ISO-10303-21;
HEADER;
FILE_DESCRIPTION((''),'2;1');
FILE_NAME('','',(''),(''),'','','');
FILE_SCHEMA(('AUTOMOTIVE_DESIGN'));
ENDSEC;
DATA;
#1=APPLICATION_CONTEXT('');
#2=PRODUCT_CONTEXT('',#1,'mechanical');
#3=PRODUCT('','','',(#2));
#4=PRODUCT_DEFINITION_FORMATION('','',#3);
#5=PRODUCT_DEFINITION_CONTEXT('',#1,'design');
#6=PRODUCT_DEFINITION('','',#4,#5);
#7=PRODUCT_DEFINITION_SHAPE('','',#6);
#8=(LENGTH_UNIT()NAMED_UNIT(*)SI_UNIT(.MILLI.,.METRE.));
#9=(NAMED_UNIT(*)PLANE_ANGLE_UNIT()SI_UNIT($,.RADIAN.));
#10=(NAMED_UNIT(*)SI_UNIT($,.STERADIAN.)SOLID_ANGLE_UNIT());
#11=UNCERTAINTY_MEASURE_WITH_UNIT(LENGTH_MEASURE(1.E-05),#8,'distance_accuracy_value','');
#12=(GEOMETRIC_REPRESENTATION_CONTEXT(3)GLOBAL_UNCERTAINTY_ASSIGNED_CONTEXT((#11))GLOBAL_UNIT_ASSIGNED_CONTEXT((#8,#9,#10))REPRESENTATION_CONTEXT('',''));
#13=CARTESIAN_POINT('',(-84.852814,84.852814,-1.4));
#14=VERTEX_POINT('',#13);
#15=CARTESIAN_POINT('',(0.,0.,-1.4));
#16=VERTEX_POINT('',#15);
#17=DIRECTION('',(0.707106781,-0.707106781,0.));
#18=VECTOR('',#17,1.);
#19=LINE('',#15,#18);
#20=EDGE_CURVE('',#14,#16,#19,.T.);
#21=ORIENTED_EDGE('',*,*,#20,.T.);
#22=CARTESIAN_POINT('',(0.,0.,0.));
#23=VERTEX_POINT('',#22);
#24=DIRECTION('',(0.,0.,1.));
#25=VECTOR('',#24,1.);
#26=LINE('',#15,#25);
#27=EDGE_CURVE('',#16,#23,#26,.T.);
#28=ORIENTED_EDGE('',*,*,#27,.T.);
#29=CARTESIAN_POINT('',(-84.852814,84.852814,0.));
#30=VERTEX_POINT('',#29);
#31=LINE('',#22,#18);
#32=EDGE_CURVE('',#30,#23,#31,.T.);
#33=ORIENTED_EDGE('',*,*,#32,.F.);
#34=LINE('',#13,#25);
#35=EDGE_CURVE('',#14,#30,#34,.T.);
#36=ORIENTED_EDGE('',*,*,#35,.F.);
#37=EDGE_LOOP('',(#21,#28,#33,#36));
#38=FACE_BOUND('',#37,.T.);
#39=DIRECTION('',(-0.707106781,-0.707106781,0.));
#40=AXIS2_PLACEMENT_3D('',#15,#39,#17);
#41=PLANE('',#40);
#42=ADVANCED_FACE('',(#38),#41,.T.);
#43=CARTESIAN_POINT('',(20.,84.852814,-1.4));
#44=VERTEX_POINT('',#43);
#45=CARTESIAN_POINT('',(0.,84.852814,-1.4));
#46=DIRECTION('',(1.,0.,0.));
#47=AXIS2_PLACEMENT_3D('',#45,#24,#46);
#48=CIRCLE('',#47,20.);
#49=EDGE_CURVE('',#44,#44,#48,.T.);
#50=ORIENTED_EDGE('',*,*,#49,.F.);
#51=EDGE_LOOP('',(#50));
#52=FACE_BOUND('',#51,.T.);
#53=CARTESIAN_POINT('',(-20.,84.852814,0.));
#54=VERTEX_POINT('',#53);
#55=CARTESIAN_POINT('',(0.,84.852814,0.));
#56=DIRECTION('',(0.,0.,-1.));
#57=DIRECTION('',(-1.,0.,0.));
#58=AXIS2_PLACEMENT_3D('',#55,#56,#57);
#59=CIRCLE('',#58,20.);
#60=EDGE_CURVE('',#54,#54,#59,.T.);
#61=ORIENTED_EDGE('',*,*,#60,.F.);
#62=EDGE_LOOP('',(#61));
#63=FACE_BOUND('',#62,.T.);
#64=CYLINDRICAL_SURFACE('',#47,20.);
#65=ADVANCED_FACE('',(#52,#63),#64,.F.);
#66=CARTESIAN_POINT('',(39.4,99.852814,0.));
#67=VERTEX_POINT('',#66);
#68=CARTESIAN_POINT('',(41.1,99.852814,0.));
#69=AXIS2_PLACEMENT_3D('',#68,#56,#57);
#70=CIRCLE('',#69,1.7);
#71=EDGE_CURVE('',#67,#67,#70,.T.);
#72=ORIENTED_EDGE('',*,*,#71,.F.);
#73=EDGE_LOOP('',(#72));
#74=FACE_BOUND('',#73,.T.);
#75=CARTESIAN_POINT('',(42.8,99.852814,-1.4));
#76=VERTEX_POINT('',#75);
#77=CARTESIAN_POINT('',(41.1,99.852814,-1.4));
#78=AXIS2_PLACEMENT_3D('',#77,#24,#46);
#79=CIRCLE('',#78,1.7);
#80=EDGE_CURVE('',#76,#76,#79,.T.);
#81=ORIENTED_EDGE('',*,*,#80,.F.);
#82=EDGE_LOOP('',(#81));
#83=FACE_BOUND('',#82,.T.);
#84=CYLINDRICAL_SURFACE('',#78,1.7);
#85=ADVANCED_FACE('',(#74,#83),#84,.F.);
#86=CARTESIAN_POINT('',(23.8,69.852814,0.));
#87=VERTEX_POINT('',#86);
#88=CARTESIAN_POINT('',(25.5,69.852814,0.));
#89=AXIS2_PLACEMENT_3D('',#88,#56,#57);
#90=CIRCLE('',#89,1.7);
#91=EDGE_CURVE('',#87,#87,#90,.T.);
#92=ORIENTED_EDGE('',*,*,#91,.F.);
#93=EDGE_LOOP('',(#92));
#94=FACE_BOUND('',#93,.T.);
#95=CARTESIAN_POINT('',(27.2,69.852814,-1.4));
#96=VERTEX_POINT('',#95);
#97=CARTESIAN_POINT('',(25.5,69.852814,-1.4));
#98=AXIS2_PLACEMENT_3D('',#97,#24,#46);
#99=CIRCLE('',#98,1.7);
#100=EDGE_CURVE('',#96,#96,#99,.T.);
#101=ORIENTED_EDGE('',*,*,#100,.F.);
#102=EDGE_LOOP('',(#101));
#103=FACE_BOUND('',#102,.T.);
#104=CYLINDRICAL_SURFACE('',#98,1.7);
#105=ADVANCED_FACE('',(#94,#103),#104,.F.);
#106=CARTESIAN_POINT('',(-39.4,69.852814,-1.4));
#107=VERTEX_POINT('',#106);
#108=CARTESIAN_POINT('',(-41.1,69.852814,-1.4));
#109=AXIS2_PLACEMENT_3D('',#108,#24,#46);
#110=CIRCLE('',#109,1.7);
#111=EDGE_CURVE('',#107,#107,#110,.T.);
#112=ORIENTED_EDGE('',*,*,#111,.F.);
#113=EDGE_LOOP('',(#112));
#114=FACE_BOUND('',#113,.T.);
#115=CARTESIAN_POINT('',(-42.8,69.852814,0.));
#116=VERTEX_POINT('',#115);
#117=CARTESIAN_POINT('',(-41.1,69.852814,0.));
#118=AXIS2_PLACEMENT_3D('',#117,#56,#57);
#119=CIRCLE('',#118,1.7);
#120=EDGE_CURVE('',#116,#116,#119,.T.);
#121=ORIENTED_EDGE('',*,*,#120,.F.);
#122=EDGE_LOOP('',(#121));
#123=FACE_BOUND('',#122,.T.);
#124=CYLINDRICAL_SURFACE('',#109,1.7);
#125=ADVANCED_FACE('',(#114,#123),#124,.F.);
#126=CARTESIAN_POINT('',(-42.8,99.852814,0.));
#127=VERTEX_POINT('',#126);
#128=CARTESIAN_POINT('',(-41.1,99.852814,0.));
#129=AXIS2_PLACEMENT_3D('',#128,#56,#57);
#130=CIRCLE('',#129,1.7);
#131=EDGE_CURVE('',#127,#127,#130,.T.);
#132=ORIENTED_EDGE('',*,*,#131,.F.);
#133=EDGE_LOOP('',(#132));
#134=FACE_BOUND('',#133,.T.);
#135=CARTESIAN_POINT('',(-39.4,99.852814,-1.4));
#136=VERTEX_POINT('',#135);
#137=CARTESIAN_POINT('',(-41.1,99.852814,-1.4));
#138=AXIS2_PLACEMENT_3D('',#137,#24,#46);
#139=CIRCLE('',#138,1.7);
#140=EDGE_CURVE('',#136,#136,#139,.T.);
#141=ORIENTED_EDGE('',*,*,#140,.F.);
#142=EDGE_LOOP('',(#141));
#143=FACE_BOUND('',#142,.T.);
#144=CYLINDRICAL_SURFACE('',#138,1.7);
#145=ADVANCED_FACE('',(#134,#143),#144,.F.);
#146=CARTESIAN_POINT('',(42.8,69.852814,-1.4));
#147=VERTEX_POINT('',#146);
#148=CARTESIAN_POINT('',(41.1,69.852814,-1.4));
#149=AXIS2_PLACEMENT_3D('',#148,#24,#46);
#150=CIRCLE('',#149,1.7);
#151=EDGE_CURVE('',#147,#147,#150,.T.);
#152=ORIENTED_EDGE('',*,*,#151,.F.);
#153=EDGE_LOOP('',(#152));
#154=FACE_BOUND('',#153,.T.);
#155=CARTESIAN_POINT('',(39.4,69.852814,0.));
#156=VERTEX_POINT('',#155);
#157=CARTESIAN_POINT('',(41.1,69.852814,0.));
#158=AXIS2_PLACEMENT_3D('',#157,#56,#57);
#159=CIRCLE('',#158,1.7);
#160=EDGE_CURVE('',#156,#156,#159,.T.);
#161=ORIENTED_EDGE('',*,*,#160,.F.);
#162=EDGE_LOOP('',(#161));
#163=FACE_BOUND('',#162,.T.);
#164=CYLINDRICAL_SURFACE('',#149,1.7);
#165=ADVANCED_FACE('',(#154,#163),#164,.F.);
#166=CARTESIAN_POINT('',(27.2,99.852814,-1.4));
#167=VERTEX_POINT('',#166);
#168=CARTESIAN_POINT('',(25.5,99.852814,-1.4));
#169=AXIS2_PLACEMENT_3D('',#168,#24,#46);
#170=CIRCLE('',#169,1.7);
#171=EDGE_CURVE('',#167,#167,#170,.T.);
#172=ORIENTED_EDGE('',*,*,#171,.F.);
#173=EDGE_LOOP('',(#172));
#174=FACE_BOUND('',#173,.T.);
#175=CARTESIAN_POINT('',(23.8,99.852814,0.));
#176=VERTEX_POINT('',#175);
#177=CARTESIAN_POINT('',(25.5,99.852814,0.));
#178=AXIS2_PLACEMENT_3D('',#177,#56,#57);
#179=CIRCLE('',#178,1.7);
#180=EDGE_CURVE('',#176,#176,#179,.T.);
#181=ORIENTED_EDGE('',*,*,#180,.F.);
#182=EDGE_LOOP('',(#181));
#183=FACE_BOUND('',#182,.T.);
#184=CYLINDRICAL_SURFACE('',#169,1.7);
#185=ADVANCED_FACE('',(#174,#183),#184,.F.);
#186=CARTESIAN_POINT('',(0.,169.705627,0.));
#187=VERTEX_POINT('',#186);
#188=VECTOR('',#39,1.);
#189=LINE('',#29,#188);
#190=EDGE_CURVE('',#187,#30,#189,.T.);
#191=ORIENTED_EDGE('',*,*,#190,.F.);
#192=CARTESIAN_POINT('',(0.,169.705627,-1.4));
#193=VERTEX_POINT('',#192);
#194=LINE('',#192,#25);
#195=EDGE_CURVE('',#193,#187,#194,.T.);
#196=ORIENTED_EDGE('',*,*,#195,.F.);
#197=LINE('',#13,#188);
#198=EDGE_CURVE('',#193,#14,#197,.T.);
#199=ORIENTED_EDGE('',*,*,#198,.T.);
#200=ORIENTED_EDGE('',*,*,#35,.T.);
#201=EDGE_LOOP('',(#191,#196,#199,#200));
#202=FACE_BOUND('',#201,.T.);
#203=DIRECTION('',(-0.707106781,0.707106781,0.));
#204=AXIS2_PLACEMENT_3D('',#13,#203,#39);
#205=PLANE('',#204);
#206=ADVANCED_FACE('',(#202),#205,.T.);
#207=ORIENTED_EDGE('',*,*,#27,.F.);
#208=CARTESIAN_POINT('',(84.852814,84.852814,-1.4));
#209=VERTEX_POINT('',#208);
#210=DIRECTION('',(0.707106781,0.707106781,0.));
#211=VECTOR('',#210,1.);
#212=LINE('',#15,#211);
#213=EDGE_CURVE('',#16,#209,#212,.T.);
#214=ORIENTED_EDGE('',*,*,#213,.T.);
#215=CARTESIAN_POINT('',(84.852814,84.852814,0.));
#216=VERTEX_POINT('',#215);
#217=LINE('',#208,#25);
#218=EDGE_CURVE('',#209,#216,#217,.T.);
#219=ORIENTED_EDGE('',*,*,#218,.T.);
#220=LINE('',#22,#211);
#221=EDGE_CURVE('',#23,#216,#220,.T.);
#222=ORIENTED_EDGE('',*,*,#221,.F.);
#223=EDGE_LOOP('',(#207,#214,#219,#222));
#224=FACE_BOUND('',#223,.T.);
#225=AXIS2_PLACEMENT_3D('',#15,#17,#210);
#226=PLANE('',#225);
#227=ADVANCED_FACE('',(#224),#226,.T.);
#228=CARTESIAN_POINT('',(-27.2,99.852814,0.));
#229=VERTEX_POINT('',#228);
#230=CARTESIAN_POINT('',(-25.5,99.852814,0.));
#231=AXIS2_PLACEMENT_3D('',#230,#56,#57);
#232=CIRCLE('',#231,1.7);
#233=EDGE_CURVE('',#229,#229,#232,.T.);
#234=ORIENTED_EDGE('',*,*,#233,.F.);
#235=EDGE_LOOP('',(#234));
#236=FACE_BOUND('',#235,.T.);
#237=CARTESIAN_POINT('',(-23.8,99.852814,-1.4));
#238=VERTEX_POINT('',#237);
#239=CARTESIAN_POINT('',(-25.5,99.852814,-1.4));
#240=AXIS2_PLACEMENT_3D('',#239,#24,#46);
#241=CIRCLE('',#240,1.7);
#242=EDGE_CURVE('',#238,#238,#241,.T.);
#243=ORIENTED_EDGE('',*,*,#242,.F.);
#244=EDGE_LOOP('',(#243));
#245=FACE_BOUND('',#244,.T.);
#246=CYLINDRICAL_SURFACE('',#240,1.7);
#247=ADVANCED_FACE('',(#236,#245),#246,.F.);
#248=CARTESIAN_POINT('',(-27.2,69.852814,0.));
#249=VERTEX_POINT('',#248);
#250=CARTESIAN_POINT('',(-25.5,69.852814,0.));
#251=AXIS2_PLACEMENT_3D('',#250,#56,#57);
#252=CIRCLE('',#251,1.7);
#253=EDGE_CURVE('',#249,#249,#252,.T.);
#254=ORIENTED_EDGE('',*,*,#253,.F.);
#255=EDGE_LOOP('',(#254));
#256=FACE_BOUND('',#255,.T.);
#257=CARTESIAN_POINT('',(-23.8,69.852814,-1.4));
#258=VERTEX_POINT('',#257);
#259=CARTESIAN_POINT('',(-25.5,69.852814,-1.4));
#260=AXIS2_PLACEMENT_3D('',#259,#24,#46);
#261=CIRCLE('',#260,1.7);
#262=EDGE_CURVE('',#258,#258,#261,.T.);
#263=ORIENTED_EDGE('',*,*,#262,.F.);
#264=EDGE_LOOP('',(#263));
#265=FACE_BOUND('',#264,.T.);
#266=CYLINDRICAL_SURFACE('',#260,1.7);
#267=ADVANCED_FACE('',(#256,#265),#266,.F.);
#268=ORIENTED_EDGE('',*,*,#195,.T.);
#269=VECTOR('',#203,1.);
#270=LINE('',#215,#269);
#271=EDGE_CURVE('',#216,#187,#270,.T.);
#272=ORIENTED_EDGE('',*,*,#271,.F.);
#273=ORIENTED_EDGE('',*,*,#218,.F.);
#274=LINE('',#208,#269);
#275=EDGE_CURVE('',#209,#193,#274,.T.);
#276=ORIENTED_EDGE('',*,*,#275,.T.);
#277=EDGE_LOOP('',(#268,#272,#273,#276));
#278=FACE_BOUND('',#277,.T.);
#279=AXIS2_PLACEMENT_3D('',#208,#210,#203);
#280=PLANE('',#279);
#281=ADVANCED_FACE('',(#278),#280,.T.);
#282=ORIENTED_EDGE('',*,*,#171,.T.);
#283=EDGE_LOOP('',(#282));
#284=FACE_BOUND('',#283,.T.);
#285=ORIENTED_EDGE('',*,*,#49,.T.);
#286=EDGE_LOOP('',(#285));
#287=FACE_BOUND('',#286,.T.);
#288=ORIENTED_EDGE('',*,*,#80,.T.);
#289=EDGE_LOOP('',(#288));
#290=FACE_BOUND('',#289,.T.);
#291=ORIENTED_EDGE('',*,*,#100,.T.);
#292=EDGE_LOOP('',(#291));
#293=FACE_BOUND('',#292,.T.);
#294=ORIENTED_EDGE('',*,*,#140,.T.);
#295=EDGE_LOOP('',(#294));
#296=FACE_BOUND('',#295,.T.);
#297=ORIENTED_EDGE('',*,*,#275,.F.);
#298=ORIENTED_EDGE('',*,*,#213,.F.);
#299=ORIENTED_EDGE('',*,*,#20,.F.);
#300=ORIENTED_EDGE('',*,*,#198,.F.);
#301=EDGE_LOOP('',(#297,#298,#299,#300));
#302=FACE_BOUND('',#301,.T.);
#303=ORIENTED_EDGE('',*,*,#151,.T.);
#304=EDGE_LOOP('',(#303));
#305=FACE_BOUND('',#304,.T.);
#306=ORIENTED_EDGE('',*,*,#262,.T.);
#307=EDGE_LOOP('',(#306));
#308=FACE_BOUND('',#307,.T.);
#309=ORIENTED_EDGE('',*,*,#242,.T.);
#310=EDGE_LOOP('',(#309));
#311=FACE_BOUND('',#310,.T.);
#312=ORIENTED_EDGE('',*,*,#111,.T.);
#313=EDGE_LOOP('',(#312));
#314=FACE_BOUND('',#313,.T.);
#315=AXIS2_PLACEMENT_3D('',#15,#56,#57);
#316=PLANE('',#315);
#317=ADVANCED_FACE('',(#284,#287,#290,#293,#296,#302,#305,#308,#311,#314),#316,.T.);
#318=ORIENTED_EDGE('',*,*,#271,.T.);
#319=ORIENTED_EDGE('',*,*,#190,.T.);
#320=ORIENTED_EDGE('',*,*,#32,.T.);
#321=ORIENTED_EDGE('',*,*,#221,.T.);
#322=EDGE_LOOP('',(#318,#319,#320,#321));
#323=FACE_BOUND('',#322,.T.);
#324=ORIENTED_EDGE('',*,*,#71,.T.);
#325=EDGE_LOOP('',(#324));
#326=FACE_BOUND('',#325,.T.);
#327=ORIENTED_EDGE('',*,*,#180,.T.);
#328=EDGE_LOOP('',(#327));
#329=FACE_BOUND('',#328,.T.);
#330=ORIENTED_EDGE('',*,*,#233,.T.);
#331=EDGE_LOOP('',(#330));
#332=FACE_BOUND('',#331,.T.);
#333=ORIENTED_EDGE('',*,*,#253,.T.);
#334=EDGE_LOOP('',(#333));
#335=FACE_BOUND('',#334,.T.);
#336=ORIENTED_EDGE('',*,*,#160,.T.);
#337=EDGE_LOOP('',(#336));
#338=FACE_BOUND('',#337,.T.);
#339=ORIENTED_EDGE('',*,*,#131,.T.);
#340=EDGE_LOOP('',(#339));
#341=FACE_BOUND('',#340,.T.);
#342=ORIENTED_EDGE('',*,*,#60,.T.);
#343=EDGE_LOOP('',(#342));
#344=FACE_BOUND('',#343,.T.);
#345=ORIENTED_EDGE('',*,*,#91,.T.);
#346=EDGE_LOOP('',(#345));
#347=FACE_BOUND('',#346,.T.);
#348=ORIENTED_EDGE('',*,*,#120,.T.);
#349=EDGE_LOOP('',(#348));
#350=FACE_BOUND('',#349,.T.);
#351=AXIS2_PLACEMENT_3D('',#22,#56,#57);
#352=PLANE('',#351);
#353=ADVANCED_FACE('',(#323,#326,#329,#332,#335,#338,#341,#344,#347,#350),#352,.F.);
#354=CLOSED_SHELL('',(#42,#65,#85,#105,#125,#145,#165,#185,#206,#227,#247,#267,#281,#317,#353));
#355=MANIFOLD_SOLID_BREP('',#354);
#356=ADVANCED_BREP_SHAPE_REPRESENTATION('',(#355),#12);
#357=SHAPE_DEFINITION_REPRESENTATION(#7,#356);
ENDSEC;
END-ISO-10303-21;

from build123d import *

# Parameters (mm, degrees)
BASE_FLANGE1_DEPTH      = 1.4
CUT_EXTRUDE1_DEPTH      = 190.741824593
CUT_EXTRUDE1_DEPTH_BACK = 190.741824593
MOTOR_HOLE_R            = 20
CUT_EXTRUDE2_DEPTH      = 190.741824593
CUT_EXTRUDE2_DEPTH_BACK = 190.741824593
SKETCH9_R               = 1.7


# Sheet-metal steps are written as plain solids
with BuildPart() as part:
    # Sketch1 → Base-Flange1 (new body)
    with BuildSketch(Plane.XY):
        Polygon((0, 0), (84.852813742, 84.852813742), (0, 169.705627485), (-84.852813742, 84.852813742), align=None)
    extrude(amount=-BASE_FLANGE1_DEPTH)

    # Motor hole → Cut-Extrude1 (cut, two sides: drawn at the far end of the back side and taken through both)
    with BuildSketch(Plane.XY.offset(-CUT_EXTRUDE1_DEPTH_BACK)):
        with Locations((0, 84.852813742)):
            Circle(MOTOR_HOLE_R)
    extrude(amount=CUT_EXTRUDE1_DEPTH + CUT_EXTRUDE1_DEPTH_BACK, mode=Mode.SUBTRACT)

    # Sketch9 → Cut-Extrude2 (cut, two sides: drawn at the far end of the back side and taken through both)
    with BuildSketch(Plane.XY.offset(-CUT_EXTRUDE2_DEPTH_BACK)):
        with Locations((-41.1, 99.852813742)):
            Circle(SKETCH9_R)
        with Locations((-25.5, 99.852813742)):
            Circle(SKETCH9_R)
        with Locations((-41.1, 69.852813742)):
            Circle(SKETCH9_R)
        with Locations((-25.5, 69.852813742)):
            Circle(SKETCH9_R)
        with Locations((25.5, 99.852813742)):
            Circle(SKETCH9_R)
        with Locations((41.1, 99.852813742)):
            Circle(SKETCH9_R)
        with Locations((25.5, 69.852813742)):
            Circle(SKETCH9_R)
        with Locations((41.1, 69.852813742)):
            Circle(SKETCH9_R)
    extrude(amount=CUT_EXTRUDE2_DEPTH + CUT_EXTRUDE2_DEPTH_BACK, mode=Mode.SUBTRACT)


solid = part.part
